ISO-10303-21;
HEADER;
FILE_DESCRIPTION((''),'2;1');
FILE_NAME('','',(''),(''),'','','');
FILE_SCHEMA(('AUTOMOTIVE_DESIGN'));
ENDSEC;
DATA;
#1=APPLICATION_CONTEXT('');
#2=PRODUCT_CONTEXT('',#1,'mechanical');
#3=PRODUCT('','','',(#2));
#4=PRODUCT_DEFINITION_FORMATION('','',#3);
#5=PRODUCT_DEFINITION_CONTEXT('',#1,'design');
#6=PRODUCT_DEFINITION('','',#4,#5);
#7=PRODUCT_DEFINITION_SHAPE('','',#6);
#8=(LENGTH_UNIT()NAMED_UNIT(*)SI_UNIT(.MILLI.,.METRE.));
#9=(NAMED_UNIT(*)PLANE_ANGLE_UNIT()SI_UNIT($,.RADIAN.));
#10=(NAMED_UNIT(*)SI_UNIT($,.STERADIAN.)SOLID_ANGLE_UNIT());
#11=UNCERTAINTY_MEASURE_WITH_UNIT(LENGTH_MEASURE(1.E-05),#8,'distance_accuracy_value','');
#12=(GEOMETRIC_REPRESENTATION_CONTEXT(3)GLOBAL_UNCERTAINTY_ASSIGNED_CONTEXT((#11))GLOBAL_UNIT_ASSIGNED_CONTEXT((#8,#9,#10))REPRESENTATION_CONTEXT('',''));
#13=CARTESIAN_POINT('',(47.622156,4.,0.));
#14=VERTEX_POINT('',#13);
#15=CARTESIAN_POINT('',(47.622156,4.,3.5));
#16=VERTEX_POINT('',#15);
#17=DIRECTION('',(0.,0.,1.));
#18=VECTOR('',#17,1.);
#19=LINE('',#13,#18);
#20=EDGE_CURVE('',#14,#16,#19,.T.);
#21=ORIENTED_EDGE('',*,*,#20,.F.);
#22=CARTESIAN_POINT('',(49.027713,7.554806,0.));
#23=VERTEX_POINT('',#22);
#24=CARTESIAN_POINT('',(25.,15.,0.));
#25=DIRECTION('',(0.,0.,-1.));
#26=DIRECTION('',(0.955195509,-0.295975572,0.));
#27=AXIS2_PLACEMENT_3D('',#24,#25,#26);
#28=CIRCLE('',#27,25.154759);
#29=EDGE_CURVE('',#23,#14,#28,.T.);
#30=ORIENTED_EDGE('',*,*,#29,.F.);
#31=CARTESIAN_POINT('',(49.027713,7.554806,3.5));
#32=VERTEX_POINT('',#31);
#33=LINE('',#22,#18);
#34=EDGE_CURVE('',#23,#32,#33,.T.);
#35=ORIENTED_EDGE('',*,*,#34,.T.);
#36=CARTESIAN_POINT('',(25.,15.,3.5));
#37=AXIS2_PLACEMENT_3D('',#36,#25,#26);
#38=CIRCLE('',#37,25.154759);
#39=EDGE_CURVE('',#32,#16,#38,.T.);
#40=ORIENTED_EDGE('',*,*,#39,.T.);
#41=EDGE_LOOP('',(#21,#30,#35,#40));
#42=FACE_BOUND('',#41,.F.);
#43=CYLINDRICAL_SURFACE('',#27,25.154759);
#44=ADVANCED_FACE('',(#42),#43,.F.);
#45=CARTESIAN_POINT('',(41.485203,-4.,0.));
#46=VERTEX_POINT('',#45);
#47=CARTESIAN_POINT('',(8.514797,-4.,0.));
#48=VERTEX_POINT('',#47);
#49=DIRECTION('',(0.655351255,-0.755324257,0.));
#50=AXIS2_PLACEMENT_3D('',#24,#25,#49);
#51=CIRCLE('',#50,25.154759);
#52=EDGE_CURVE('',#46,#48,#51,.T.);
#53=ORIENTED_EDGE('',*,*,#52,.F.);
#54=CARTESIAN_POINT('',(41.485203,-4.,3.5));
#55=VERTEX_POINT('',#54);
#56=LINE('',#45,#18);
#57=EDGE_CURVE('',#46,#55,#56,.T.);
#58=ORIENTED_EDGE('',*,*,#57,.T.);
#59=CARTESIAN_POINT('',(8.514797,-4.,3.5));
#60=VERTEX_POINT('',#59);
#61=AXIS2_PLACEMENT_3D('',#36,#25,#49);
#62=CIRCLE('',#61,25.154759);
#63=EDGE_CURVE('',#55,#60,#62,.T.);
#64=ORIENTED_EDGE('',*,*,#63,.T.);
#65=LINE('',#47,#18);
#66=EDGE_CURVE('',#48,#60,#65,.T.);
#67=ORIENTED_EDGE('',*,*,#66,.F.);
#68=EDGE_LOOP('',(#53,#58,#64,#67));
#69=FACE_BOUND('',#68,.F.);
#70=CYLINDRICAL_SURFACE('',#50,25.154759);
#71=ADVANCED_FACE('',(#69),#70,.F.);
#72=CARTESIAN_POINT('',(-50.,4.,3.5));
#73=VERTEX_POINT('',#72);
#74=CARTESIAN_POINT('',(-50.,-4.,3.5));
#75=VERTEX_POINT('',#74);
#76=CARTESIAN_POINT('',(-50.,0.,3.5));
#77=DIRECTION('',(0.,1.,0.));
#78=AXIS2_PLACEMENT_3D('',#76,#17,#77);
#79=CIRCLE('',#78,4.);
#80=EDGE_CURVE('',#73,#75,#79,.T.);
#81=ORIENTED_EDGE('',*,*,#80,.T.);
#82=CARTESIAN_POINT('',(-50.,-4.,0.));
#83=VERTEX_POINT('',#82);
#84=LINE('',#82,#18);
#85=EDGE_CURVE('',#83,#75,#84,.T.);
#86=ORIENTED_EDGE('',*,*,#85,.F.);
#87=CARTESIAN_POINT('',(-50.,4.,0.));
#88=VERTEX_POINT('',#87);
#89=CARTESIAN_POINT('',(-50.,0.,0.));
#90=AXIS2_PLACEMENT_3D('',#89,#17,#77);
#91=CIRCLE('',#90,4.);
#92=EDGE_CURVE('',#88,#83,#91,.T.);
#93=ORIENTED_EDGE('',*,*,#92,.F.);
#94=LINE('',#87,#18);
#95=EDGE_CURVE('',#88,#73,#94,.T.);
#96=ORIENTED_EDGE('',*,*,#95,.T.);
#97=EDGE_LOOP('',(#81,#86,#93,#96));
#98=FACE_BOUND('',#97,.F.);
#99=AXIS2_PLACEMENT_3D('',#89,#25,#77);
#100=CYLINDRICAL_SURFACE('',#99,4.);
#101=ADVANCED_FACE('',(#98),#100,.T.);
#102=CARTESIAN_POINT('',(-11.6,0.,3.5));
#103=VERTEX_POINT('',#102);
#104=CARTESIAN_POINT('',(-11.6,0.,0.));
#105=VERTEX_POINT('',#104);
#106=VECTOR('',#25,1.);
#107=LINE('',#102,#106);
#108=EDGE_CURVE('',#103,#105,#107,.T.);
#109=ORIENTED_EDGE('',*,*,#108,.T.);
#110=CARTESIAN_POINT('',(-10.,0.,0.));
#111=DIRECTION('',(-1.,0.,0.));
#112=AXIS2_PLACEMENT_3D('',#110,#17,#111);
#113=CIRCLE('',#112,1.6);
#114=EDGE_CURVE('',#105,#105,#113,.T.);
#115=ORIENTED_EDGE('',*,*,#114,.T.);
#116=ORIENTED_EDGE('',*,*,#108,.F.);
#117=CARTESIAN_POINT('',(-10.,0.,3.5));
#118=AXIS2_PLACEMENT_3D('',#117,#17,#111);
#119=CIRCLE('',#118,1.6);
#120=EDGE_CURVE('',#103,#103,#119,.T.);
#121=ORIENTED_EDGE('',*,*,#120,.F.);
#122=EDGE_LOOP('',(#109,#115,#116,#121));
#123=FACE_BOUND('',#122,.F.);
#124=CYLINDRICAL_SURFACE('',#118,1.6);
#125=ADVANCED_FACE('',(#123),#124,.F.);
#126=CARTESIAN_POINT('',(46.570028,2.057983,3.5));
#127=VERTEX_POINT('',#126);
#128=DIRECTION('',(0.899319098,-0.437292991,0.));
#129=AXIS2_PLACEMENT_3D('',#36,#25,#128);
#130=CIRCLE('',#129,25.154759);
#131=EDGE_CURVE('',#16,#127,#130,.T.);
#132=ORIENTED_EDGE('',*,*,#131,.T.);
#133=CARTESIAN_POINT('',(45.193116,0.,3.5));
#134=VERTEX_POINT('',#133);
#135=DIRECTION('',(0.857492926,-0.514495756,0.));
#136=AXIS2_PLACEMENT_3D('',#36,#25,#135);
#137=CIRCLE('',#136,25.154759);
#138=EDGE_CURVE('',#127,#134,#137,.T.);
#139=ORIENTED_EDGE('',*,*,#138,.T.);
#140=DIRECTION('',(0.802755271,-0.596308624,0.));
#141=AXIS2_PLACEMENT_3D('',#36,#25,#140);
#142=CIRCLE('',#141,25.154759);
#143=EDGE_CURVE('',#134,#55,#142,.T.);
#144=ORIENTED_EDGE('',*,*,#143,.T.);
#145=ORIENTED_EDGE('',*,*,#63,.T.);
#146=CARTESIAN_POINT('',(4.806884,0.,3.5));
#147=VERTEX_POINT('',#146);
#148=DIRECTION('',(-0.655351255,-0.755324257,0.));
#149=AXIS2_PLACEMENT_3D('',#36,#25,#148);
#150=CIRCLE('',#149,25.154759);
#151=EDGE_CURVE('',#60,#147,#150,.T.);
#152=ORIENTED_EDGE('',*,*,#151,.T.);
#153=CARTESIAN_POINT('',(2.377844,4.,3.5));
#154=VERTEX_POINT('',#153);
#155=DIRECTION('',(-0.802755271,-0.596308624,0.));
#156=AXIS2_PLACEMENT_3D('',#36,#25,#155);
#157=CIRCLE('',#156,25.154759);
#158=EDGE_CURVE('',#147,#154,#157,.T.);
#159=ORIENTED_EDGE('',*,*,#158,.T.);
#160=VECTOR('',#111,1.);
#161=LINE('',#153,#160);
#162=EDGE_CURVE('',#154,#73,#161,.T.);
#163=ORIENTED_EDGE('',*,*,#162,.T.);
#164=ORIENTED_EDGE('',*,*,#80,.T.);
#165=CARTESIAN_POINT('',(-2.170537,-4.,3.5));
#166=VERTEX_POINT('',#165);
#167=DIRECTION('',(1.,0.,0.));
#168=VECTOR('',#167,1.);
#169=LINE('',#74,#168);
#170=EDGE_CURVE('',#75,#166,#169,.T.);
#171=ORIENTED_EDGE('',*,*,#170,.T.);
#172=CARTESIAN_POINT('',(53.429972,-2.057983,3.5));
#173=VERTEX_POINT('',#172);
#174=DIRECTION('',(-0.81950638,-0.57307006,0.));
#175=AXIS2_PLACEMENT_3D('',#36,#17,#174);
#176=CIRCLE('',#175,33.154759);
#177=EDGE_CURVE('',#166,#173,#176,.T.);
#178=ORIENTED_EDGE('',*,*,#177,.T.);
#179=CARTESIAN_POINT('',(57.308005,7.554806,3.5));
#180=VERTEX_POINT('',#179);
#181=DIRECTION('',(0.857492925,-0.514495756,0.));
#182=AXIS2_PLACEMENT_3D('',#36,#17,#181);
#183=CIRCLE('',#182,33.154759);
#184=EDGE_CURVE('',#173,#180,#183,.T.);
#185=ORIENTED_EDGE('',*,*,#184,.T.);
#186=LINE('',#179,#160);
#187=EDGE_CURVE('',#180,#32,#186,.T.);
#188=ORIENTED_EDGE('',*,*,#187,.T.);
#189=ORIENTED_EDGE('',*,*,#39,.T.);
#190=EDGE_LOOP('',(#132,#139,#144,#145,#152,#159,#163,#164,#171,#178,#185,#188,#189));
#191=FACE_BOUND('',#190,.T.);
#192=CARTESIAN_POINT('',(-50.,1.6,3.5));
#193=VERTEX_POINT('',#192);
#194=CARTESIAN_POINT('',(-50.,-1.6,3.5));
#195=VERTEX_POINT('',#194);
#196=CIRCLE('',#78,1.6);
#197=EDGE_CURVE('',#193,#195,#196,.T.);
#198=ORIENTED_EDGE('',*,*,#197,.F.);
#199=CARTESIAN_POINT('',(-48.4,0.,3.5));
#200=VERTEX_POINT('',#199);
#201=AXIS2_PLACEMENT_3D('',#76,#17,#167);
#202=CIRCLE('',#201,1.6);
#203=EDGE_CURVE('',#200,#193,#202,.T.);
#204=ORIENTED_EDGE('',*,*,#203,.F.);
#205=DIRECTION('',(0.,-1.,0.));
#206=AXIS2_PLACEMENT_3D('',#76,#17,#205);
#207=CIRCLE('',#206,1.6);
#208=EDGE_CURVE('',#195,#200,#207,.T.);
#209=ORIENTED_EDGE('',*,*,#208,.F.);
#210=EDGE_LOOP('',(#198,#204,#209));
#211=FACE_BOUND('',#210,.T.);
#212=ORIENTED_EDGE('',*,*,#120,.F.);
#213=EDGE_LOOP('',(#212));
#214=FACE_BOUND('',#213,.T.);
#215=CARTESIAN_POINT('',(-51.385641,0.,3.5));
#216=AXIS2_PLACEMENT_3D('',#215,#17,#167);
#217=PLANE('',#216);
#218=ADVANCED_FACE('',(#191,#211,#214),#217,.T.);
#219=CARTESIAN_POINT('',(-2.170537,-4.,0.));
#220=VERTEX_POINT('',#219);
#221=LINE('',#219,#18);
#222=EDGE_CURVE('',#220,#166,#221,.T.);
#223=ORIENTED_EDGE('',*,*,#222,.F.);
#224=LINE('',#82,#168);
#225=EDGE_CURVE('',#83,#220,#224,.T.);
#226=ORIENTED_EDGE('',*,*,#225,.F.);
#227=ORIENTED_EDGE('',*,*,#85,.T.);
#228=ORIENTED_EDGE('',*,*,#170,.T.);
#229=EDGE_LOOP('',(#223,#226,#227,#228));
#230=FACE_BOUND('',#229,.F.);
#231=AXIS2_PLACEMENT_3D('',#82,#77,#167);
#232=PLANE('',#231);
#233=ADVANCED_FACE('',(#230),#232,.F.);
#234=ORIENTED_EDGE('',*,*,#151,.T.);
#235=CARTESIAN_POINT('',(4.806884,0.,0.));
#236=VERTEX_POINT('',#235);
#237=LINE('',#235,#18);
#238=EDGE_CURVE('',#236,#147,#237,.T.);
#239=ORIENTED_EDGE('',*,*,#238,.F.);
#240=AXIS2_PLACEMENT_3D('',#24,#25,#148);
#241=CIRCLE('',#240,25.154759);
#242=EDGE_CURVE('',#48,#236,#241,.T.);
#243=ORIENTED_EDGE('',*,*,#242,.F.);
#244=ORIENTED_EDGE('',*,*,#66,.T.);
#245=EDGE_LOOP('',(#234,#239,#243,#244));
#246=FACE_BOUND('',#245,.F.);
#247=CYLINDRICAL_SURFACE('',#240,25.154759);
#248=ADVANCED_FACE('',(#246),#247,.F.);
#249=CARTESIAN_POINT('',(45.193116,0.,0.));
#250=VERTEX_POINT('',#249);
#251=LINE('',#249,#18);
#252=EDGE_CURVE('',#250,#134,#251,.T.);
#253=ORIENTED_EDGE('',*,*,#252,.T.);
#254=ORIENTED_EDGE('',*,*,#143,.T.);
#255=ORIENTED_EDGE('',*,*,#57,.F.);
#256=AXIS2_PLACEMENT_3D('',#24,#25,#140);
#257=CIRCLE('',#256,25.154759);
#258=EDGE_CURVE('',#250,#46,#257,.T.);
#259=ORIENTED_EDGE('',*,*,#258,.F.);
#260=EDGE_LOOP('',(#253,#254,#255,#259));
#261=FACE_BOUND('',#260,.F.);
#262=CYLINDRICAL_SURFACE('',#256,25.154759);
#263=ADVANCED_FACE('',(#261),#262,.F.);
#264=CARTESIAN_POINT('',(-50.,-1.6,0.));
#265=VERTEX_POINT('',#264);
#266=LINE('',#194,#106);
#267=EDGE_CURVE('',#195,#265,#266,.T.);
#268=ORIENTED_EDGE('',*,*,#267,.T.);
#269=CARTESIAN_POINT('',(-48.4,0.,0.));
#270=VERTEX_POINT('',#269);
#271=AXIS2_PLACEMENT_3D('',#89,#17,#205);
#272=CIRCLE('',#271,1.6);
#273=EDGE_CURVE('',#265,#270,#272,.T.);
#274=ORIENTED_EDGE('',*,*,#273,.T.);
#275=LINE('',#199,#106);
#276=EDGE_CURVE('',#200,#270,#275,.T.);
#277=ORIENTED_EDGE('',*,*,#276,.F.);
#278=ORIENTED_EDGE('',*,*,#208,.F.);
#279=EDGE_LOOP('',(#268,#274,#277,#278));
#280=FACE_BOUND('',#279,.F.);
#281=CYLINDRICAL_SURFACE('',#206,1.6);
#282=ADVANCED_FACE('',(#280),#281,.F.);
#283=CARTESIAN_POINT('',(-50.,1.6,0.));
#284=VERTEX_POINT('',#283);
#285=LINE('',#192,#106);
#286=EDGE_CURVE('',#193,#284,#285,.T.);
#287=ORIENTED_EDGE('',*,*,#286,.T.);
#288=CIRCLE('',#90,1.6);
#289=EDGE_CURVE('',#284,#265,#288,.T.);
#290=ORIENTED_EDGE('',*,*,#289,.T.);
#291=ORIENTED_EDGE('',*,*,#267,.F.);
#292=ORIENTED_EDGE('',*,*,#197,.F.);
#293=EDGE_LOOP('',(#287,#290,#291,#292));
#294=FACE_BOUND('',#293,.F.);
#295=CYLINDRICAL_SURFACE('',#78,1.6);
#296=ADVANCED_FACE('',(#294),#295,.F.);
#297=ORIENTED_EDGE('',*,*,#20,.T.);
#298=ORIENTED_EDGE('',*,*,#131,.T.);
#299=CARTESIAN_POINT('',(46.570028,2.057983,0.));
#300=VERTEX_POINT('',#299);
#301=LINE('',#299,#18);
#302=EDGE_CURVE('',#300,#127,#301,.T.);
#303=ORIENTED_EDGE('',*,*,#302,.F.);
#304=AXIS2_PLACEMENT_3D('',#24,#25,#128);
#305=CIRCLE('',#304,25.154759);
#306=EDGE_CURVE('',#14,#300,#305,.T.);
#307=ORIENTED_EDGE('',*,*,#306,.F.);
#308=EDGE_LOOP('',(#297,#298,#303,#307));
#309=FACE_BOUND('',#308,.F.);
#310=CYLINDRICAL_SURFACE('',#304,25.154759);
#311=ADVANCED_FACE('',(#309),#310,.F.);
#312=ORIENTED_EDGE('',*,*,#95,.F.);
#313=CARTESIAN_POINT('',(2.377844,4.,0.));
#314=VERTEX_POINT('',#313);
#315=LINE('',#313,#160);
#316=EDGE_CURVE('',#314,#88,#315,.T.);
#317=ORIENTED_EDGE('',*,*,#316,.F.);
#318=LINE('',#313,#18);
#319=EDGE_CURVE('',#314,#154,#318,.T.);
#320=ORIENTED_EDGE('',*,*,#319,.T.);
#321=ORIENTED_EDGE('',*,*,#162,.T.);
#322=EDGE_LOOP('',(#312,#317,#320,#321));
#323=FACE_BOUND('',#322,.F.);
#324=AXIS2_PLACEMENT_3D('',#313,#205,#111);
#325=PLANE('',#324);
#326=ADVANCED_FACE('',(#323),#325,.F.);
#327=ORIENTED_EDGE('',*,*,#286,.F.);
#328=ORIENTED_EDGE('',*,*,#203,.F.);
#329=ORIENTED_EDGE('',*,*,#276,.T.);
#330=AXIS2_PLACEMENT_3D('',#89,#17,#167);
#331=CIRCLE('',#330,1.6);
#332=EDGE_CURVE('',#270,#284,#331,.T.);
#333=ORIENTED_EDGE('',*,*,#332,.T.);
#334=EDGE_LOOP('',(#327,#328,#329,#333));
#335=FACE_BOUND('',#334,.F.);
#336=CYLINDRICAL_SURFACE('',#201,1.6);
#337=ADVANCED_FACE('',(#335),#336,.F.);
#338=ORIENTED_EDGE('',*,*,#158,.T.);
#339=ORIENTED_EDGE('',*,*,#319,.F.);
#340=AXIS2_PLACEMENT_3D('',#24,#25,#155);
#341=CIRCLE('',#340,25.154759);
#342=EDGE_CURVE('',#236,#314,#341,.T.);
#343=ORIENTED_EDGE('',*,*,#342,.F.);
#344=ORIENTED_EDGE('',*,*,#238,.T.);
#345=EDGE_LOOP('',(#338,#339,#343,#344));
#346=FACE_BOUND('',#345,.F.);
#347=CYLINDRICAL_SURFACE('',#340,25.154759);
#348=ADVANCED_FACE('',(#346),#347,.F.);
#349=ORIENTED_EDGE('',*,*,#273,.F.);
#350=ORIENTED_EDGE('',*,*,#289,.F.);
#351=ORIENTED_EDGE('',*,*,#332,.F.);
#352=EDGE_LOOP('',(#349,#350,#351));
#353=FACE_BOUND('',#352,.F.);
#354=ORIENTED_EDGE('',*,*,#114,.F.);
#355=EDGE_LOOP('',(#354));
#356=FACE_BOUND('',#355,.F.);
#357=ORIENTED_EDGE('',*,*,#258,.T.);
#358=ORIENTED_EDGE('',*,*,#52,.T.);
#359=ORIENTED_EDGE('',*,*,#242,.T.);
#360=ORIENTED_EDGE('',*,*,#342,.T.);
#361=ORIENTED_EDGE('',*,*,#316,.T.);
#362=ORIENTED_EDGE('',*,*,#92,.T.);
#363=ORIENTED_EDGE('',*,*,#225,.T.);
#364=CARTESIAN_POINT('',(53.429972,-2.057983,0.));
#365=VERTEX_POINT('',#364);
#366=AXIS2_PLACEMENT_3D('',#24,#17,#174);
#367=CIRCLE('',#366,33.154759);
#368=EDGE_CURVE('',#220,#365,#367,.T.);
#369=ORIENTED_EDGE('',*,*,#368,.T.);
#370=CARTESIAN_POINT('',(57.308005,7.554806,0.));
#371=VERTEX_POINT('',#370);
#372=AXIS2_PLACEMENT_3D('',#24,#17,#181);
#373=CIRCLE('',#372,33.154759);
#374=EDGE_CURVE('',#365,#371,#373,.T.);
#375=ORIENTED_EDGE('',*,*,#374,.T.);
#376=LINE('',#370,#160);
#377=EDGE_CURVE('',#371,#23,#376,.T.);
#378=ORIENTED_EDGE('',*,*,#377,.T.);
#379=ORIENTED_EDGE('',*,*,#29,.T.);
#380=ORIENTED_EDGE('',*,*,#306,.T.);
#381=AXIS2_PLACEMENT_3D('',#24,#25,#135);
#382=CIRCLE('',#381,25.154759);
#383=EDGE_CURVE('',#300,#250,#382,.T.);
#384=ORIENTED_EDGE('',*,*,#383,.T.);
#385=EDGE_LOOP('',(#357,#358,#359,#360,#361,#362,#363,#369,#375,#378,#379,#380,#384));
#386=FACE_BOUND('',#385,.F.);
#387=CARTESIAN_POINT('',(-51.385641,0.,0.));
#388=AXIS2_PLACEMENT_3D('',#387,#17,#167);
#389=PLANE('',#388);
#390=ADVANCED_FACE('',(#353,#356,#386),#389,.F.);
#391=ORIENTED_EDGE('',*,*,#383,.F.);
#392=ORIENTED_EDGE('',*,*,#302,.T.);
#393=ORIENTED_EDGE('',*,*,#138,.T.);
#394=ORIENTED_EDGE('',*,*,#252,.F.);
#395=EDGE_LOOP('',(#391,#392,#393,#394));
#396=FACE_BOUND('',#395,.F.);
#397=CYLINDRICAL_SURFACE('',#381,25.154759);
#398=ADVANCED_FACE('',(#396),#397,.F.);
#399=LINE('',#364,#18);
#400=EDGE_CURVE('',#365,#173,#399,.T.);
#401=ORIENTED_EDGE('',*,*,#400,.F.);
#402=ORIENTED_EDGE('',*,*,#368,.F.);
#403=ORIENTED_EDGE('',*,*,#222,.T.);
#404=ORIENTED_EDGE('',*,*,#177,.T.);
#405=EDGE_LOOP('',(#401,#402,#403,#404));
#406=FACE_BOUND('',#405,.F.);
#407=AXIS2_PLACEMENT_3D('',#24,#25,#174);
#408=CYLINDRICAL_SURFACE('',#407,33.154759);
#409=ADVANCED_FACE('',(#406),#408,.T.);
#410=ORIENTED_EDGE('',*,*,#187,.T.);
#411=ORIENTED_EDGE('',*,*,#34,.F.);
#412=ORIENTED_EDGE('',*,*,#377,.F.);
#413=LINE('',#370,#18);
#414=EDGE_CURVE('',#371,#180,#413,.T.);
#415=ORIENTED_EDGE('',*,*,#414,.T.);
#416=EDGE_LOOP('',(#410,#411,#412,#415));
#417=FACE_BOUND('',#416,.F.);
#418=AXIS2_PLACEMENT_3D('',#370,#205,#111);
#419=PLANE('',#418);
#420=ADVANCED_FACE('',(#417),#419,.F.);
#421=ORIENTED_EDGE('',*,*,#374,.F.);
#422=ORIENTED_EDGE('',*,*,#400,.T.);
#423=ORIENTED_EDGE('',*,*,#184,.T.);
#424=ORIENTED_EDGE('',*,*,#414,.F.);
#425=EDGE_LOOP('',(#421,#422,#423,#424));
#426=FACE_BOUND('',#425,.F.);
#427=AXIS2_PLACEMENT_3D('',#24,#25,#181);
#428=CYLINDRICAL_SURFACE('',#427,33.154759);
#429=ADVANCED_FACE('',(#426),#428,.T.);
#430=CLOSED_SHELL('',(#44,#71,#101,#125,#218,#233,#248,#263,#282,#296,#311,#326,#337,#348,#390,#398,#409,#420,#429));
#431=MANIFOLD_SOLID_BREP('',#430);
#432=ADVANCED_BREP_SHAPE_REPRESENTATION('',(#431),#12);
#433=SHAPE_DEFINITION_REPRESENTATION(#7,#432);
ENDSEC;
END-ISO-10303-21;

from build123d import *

# Parameters (mm, degrees)
F1_DEPTH = 3.5
F3_DEPTH = 3.501


# Not quite as in the source:
# - a feature names something its author has since deleted; it is built from what else it names


with BuildPart() as f1:
    # F0 (on Top) → F1 (new body)
    with BuildSketch(Plane.XY):
        with BuildLine():
            ThreePointArc((-50, 4), (-54, 0), (-50, -4))
            Line((-50, -4), (-50, 4))
        make_face()
        with BuildLine():
            Line((-50, 4), (-50, -4))
            ThreePointArc((-50, -4), (-47.1715728753, -2.8284271247), (-46, 0))
            ThreePointArc((-46, 0), (-47.1715728753, 2.8284271247), (-50, 4))
        make_face()
        with BuildLine():
            Line((-50, -4), (-2.1705369066, -4))
            ThreePointArc((-2.1705369066, -4), (-4.496147737, -0.1398594601), (-6.2767977228, 4))
            Line((-6.2767977228, 4), (-50, 4))
            ThreePointArc((-50, 4), (-47.1715728753, 2.8284271247), (-46, 0))
            ThreePointArc((-46, 0), (-47.1715728753, -2.8284271247), (-50, -4))
        make_face()
        with BuildLine():
            Line((-2.1705369066, -4), (8.5147968103, -4))
            ThreePointArc((8.5147968103, -4), (6.5521066164, -2.1007939556), (4.8068842373, 0))
            ThreePointArc((4.8068842373, 0), (3.4991426783, 1.9433902318), (2.3778443952, 4))
            Line((2.3778443952, 4), (-6.2767977228, 4))
            ThreePointArc((-6.2767977228, 4), (-4.496147737, -0.1398594601), (-2.1705369066, -4))
        make_face()
        with BuildLine():
            ThreePointArc((53.4299716908, -2.0579830418), (51.9707952498, -3.4807996328), (50, -4))
            Line((50, -4), (41.4852031897, -4))
            ThreePointArc((41.4852031897, -4), (25, -10.1547594742), (8.5147968103, -4))
            Line((8.5147968103, -4), (-2.1705369066, -4))
            ThreePointArc((-2.1705369066, -4), (26.1573251317, -18.1345540838), (53.4299716908, -2.0579830418))
        make_face()
        with BuildLine():
            Line((41.4852031897, -4), (50, -4))
            ThreePointArc((50, -4), (47.1715728753, -2.8284271247), (46, 0))
            Line((46, 0), (45.1931157627, 0))
            ThreePointArc((45.1931157627, 0), (43.4478933836, -2.1007939556), (41.4852031897, -4))
        make_face()
        with BuildLine():
            ThreePointArc((46, 0), (47.1715728753, -2.8284271247), (50, -4))
            Line((50, -4), (50, 0))
            Line((50, 0), (46, 0))
        make_face()
        with BuildLine():
            Line((50, 0), (50, -4))
            ThreePointArc((50, -4), (51.9707952498, -3.4807996328), (53.4299716908, -2.0579830418))
            ThreePointArc((53.4299716908, -2.0579830418), (53.8548597097, -1.0677343389), (54, 0))
            ThreePointArc((54, 0), (52.8284271247, 2.8284271247), (50, 4))
            Line((50, 4), (50, 0))
        make_face()
        with BuildLine():
            Line((46, 0), (50, 0))
            Line((50, 0), (50, 4))
            ThreePointArc((50, 4), (48.0292047387, 3.4807996262), (46.5700282955, 2.0579830189))
            ThreePointArc((46.5700282955, 2.0579830189), (46.1451402867, 1.067734326), (46, 0))
        make_face()
        with BuildLine():
            ThreePointArc((46.5700282955, 2.0579830189), (48.0292047387, 3.4807996262), (50, 4))
            Line((50, 4), (47.6221556048, 4))
            ThreePointArc((47.6221556048, 4), (47.1174170499, 3.0174382017), (46.5700282955, 2.0579830189))
        make_face()
        with BuildLine():
            Line((45.1931157627, 0), (46, 0))
            ThreePointArc((46, 0), (46.1451402867, 1.067734326), (46.5700282955, 2.0579830189))
            ThreePointArc((46.5700282955, 2.0579830189), (45.9069097174, 1.0120390952), (45.1931157627, 0))
        make_face()
        with BuildLine():
            ThreePointArc((54, 0), (53.8548597097, -1.0677343389), (53.4299716908, -2.0579830418))
            ThreePointArc((53.4299716908, -2.0579830418), (55.7469814085, 2.5959196207), (57.3080045365, 7.5548056666))
            Line((57.3080045365, 7.5548056666), (49.0277132816, 7.5548056666))
            ThreePointArc((49.0277132816, 7.5548056666), (48.3925570986, 5.7506650728), (47.6221556048, 4))
            Line((47.6221556048, 4), (50, 4))
            ThreePointArc((50, 4), (52.8284271247, 2.8284271247), (54, 0))
        make_face()
    extrude(amount=F1_DEPTH)

    # F2 (on face) → F3 (cut, through all)
    with BuildSketch(Plane.XY.offset(3.5)):
        with BuildLine():
            ThreePointArc((-48.4, 0), (-48.8686291501, 1.1313708499), (-50, 1.6))
            Line((-50, 1.6), (-50, 0))
            Line((-50, 0), (-48.4, 0))
        make_face()
        with BuildLine():
            Line((-50, 0), (-50, 1.6))
            ThreePointArc((-50, 1.6), (-51.6, 0), (-50, -1.6))
            Line((-50, -1.6), (-50, 0))
        make_face()
        with BuildLine():
            ThreePointArc((-8.4, 0), (-10, 1.6), (-11.6, 0))
            ThreePointArc((-11.6, 0), (-10, -1.6), (-8.4, 0))
        make_face()
        with BuildLine():
            Line((-48.4, 0), (-50, 0))
            Line((-50, 0), (-50, -1.6))
            ThreePointArc((-50, -1.6), (-48.8686291501, -1.1313708499), (-48.4, 0))
        make_face()
    extrude(amount=-F3_DEPTH, mode=Mode.SUBTRACT)


solid = f1.part
